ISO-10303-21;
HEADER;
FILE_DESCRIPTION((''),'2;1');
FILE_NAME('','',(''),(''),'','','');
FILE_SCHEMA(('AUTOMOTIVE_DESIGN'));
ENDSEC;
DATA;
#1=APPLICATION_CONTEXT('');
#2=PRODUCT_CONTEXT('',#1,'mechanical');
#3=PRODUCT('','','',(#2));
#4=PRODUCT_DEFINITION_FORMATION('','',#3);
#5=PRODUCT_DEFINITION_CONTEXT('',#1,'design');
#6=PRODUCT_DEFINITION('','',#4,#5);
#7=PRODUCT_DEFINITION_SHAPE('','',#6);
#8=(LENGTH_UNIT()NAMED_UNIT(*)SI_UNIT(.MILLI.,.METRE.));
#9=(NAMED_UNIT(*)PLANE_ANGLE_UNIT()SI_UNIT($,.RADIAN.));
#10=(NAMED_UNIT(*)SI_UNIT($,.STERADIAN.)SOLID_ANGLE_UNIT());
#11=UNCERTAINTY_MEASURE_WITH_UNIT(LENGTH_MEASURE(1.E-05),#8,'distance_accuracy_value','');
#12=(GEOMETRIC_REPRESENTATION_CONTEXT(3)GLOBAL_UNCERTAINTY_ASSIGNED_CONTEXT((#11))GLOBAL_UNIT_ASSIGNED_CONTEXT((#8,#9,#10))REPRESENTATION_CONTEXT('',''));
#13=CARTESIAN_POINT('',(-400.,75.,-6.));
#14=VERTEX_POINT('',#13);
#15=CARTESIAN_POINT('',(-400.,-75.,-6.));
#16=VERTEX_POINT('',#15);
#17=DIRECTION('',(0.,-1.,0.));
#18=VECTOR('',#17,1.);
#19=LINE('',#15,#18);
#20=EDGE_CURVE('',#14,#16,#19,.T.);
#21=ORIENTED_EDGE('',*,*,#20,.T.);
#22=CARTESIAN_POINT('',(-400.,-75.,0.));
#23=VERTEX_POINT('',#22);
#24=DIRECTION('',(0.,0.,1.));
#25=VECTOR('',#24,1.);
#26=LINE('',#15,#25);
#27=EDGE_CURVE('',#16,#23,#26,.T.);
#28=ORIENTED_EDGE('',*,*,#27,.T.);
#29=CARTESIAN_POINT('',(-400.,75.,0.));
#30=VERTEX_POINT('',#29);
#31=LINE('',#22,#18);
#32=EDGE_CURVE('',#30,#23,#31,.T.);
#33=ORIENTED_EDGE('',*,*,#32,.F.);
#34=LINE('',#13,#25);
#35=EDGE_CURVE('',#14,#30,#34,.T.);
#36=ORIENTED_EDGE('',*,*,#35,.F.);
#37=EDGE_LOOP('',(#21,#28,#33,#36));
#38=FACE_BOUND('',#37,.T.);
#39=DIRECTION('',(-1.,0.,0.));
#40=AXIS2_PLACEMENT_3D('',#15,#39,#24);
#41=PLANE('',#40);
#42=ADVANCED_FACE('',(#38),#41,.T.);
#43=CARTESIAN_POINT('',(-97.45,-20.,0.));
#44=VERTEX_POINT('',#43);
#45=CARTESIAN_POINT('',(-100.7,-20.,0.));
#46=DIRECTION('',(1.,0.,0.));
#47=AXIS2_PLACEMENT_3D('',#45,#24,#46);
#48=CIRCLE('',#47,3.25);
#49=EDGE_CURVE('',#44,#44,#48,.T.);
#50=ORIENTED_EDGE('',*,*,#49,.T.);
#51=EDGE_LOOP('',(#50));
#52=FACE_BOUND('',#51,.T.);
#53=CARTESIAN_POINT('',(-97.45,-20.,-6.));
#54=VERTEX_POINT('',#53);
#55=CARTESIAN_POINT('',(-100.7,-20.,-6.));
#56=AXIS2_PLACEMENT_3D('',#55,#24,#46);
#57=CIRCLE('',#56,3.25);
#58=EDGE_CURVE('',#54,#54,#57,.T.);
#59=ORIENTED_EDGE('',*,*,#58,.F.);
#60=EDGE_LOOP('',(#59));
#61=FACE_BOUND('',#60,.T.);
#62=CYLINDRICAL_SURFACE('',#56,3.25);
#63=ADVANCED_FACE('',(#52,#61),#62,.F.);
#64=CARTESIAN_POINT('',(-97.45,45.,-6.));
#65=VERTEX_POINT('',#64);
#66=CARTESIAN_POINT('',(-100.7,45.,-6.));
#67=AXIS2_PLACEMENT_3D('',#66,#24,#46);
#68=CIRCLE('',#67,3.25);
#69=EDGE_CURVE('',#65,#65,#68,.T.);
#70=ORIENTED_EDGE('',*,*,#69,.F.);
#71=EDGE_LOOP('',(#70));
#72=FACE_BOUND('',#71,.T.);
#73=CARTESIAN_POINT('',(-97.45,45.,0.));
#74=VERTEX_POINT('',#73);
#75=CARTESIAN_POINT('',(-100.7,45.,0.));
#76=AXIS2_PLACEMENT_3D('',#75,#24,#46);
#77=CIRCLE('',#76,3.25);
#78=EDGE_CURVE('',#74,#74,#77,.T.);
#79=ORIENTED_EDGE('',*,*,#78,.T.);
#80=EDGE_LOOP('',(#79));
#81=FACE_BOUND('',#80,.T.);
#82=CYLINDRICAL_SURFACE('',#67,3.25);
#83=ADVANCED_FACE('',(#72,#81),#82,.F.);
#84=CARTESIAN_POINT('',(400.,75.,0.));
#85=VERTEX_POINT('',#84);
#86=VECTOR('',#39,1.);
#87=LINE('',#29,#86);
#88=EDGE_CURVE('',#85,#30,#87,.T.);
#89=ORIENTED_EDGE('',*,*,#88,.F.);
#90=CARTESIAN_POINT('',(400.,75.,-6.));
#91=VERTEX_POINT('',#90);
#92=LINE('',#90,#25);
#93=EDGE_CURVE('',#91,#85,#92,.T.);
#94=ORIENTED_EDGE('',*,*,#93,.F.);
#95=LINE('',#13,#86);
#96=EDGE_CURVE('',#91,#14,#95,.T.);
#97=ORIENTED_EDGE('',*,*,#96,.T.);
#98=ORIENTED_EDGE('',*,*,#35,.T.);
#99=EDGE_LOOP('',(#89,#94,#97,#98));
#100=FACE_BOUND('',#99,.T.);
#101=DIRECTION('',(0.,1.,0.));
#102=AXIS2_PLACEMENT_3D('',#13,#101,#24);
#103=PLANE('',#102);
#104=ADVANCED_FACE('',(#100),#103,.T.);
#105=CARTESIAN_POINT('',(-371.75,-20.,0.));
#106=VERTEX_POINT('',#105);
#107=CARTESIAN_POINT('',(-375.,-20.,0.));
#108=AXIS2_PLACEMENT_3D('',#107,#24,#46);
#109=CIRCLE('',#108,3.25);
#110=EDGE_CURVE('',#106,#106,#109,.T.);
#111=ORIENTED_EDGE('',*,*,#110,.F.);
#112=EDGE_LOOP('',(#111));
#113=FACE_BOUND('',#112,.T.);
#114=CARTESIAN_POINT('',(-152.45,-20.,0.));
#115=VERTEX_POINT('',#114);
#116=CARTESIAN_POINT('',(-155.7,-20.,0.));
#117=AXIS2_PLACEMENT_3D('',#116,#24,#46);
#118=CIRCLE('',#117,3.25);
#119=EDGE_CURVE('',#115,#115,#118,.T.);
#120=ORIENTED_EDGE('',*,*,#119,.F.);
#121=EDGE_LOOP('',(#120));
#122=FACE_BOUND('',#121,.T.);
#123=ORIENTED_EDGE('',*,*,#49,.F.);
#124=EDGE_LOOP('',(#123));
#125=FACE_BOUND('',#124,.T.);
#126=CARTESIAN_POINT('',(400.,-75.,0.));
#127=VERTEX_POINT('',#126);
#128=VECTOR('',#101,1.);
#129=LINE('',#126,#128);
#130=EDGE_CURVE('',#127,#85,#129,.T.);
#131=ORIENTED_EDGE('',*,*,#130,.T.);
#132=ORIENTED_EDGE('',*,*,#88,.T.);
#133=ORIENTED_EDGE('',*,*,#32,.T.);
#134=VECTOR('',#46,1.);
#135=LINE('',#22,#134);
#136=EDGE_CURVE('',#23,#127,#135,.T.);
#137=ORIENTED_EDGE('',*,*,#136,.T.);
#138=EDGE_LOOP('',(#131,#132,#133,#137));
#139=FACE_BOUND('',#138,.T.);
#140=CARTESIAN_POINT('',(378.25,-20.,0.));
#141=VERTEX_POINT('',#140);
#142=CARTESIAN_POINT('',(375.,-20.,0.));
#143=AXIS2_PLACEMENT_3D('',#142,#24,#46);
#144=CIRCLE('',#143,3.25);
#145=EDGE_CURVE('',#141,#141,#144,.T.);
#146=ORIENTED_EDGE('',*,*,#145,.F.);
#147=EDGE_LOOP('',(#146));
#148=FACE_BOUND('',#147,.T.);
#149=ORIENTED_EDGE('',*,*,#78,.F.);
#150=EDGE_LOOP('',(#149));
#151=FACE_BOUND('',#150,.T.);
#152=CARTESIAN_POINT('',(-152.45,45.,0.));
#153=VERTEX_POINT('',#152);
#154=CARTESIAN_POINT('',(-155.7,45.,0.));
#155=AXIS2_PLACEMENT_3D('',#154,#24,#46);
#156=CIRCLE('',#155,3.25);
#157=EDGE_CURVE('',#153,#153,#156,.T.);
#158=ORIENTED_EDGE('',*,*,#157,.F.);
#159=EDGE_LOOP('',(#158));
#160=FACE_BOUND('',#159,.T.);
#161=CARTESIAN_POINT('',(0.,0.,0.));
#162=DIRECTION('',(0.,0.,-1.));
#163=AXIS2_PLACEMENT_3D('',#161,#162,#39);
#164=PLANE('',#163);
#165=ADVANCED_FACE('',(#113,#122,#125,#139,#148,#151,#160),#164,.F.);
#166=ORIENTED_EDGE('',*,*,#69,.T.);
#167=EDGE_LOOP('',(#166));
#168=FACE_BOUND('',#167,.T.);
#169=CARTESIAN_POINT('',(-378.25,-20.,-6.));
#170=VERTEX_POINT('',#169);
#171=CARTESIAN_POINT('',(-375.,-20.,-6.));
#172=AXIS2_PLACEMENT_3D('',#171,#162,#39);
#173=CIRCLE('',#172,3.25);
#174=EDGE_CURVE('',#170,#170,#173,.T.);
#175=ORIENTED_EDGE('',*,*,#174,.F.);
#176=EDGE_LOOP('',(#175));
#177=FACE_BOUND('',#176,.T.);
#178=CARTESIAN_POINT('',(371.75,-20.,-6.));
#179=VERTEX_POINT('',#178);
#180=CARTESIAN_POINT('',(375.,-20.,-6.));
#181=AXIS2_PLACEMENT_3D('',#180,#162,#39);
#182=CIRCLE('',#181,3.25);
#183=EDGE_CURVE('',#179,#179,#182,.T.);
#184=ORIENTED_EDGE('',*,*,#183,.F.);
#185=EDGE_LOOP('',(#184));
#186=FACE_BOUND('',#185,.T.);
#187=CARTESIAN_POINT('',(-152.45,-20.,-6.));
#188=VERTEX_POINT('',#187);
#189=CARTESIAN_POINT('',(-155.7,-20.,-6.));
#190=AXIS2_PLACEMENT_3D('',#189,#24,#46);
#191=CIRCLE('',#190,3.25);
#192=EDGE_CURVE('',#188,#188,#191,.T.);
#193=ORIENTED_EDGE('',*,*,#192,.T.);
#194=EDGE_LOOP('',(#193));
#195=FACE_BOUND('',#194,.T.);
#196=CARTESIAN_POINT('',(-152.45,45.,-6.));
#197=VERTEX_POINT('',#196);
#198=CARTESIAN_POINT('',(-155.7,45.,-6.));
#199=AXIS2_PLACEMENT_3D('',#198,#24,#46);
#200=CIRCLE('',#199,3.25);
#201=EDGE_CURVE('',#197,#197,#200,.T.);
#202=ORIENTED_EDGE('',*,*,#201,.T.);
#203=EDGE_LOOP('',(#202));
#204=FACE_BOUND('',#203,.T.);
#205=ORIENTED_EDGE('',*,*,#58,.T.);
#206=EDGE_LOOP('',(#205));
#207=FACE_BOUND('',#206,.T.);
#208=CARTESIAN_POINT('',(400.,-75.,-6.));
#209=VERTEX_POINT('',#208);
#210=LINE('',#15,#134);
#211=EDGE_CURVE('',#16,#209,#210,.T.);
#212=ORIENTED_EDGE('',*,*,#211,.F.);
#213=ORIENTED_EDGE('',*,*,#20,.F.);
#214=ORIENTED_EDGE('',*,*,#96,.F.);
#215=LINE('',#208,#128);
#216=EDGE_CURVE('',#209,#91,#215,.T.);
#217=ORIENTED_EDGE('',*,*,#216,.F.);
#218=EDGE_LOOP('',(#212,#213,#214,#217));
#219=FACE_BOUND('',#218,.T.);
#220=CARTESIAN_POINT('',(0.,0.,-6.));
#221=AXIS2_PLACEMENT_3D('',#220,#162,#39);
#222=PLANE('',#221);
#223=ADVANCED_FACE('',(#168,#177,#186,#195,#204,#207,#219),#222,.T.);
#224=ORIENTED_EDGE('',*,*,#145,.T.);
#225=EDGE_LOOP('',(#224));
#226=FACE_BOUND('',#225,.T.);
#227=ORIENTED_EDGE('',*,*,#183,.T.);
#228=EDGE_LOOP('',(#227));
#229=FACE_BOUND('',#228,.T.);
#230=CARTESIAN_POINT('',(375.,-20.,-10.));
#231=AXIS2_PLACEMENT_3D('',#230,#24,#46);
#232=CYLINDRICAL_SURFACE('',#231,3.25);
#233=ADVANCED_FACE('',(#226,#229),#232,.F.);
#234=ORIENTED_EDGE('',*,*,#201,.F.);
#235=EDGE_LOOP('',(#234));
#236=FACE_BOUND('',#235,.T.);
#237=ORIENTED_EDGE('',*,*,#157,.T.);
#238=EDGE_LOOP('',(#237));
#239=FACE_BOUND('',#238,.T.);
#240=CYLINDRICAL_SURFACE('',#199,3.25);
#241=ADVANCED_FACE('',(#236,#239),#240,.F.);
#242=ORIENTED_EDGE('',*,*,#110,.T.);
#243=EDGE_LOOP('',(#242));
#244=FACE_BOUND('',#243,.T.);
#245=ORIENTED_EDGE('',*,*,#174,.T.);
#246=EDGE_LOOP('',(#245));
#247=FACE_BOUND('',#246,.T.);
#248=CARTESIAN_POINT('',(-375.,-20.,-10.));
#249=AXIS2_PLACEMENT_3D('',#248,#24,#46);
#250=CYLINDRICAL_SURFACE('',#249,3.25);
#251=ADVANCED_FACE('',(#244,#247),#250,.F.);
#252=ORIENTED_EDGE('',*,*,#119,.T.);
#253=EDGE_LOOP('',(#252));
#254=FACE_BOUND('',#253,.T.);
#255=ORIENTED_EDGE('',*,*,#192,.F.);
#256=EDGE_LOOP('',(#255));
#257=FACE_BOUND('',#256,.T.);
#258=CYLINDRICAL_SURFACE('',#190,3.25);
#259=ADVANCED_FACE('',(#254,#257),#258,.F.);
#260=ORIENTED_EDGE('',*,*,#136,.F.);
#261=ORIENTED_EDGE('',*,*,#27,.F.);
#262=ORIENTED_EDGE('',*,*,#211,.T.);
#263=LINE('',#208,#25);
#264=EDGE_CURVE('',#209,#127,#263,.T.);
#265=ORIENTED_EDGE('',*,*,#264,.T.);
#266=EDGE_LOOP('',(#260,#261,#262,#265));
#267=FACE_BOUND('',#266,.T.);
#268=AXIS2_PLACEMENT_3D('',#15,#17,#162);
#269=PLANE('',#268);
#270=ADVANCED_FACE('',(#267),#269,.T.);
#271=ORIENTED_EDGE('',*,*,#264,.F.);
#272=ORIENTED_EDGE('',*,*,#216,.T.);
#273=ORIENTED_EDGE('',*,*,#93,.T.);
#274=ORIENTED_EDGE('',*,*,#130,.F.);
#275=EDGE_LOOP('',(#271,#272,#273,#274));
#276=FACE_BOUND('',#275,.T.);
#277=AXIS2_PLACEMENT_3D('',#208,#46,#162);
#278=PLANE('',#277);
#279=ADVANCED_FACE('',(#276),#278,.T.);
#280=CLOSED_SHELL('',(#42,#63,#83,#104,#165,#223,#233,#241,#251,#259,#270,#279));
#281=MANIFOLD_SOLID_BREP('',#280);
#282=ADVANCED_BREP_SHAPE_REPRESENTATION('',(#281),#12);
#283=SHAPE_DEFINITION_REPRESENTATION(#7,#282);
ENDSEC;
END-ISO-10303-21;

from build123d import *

# Parameters (mm, degrees)
SKETCH1_W          = 800
SKETCH1_H          = 150
BASE_FLANGE1_DEPTH = 6
SKETCH2_R          = 3.25
CUT_EXTRUDE1_DEPTH = 10
SKETCH3_R          = 3.25
CUT_EXTRUDE2_DEPTH = 408.014741748


# Sheet-metal steps are written as plain solids
with BuildPart() as part:
    # Sketch1 → Base-Flange1 (new body)
    with BuildSketch(Plane.XY):
        Rectangle(SKETCH1_W, SKETCH1_H)
    extrude(amount=-BASE_FLANGE1_DEPTH)

    # Sketch2 → Cut-Extrude1 (cut)
    with BuildSketch(Plane.XY):
        with Locations((-375, -20)):
            Circle(SKETCH2_R)
        with Locations((375, -20)):
            Circle(SKETCH2_R)
    extrude(amount=-CUT_EXTRUDE1_DEPTH, mode=Mode.SUBTRACT)

    # Sketch3 → Cut-Extrude2 (cut, through all)
    with BuildSketch(Plane.XY):
        with Locations((-100.7, 45)):
            Circle(SKETCH3_R)
        with Locations((-155.7, 45)):
            Circle(SKETCH3_R)
        with Locations((-100.7, -20)):
            Circle(SKETCH3_R)
        with Locations((-155.7, -20)):
            Circle(SKETCH3_R)
    extrude(amount=-CUT_EXTRUDE2_DEPTH, mode=Mode.SUBTRACT)


solid = part.part
